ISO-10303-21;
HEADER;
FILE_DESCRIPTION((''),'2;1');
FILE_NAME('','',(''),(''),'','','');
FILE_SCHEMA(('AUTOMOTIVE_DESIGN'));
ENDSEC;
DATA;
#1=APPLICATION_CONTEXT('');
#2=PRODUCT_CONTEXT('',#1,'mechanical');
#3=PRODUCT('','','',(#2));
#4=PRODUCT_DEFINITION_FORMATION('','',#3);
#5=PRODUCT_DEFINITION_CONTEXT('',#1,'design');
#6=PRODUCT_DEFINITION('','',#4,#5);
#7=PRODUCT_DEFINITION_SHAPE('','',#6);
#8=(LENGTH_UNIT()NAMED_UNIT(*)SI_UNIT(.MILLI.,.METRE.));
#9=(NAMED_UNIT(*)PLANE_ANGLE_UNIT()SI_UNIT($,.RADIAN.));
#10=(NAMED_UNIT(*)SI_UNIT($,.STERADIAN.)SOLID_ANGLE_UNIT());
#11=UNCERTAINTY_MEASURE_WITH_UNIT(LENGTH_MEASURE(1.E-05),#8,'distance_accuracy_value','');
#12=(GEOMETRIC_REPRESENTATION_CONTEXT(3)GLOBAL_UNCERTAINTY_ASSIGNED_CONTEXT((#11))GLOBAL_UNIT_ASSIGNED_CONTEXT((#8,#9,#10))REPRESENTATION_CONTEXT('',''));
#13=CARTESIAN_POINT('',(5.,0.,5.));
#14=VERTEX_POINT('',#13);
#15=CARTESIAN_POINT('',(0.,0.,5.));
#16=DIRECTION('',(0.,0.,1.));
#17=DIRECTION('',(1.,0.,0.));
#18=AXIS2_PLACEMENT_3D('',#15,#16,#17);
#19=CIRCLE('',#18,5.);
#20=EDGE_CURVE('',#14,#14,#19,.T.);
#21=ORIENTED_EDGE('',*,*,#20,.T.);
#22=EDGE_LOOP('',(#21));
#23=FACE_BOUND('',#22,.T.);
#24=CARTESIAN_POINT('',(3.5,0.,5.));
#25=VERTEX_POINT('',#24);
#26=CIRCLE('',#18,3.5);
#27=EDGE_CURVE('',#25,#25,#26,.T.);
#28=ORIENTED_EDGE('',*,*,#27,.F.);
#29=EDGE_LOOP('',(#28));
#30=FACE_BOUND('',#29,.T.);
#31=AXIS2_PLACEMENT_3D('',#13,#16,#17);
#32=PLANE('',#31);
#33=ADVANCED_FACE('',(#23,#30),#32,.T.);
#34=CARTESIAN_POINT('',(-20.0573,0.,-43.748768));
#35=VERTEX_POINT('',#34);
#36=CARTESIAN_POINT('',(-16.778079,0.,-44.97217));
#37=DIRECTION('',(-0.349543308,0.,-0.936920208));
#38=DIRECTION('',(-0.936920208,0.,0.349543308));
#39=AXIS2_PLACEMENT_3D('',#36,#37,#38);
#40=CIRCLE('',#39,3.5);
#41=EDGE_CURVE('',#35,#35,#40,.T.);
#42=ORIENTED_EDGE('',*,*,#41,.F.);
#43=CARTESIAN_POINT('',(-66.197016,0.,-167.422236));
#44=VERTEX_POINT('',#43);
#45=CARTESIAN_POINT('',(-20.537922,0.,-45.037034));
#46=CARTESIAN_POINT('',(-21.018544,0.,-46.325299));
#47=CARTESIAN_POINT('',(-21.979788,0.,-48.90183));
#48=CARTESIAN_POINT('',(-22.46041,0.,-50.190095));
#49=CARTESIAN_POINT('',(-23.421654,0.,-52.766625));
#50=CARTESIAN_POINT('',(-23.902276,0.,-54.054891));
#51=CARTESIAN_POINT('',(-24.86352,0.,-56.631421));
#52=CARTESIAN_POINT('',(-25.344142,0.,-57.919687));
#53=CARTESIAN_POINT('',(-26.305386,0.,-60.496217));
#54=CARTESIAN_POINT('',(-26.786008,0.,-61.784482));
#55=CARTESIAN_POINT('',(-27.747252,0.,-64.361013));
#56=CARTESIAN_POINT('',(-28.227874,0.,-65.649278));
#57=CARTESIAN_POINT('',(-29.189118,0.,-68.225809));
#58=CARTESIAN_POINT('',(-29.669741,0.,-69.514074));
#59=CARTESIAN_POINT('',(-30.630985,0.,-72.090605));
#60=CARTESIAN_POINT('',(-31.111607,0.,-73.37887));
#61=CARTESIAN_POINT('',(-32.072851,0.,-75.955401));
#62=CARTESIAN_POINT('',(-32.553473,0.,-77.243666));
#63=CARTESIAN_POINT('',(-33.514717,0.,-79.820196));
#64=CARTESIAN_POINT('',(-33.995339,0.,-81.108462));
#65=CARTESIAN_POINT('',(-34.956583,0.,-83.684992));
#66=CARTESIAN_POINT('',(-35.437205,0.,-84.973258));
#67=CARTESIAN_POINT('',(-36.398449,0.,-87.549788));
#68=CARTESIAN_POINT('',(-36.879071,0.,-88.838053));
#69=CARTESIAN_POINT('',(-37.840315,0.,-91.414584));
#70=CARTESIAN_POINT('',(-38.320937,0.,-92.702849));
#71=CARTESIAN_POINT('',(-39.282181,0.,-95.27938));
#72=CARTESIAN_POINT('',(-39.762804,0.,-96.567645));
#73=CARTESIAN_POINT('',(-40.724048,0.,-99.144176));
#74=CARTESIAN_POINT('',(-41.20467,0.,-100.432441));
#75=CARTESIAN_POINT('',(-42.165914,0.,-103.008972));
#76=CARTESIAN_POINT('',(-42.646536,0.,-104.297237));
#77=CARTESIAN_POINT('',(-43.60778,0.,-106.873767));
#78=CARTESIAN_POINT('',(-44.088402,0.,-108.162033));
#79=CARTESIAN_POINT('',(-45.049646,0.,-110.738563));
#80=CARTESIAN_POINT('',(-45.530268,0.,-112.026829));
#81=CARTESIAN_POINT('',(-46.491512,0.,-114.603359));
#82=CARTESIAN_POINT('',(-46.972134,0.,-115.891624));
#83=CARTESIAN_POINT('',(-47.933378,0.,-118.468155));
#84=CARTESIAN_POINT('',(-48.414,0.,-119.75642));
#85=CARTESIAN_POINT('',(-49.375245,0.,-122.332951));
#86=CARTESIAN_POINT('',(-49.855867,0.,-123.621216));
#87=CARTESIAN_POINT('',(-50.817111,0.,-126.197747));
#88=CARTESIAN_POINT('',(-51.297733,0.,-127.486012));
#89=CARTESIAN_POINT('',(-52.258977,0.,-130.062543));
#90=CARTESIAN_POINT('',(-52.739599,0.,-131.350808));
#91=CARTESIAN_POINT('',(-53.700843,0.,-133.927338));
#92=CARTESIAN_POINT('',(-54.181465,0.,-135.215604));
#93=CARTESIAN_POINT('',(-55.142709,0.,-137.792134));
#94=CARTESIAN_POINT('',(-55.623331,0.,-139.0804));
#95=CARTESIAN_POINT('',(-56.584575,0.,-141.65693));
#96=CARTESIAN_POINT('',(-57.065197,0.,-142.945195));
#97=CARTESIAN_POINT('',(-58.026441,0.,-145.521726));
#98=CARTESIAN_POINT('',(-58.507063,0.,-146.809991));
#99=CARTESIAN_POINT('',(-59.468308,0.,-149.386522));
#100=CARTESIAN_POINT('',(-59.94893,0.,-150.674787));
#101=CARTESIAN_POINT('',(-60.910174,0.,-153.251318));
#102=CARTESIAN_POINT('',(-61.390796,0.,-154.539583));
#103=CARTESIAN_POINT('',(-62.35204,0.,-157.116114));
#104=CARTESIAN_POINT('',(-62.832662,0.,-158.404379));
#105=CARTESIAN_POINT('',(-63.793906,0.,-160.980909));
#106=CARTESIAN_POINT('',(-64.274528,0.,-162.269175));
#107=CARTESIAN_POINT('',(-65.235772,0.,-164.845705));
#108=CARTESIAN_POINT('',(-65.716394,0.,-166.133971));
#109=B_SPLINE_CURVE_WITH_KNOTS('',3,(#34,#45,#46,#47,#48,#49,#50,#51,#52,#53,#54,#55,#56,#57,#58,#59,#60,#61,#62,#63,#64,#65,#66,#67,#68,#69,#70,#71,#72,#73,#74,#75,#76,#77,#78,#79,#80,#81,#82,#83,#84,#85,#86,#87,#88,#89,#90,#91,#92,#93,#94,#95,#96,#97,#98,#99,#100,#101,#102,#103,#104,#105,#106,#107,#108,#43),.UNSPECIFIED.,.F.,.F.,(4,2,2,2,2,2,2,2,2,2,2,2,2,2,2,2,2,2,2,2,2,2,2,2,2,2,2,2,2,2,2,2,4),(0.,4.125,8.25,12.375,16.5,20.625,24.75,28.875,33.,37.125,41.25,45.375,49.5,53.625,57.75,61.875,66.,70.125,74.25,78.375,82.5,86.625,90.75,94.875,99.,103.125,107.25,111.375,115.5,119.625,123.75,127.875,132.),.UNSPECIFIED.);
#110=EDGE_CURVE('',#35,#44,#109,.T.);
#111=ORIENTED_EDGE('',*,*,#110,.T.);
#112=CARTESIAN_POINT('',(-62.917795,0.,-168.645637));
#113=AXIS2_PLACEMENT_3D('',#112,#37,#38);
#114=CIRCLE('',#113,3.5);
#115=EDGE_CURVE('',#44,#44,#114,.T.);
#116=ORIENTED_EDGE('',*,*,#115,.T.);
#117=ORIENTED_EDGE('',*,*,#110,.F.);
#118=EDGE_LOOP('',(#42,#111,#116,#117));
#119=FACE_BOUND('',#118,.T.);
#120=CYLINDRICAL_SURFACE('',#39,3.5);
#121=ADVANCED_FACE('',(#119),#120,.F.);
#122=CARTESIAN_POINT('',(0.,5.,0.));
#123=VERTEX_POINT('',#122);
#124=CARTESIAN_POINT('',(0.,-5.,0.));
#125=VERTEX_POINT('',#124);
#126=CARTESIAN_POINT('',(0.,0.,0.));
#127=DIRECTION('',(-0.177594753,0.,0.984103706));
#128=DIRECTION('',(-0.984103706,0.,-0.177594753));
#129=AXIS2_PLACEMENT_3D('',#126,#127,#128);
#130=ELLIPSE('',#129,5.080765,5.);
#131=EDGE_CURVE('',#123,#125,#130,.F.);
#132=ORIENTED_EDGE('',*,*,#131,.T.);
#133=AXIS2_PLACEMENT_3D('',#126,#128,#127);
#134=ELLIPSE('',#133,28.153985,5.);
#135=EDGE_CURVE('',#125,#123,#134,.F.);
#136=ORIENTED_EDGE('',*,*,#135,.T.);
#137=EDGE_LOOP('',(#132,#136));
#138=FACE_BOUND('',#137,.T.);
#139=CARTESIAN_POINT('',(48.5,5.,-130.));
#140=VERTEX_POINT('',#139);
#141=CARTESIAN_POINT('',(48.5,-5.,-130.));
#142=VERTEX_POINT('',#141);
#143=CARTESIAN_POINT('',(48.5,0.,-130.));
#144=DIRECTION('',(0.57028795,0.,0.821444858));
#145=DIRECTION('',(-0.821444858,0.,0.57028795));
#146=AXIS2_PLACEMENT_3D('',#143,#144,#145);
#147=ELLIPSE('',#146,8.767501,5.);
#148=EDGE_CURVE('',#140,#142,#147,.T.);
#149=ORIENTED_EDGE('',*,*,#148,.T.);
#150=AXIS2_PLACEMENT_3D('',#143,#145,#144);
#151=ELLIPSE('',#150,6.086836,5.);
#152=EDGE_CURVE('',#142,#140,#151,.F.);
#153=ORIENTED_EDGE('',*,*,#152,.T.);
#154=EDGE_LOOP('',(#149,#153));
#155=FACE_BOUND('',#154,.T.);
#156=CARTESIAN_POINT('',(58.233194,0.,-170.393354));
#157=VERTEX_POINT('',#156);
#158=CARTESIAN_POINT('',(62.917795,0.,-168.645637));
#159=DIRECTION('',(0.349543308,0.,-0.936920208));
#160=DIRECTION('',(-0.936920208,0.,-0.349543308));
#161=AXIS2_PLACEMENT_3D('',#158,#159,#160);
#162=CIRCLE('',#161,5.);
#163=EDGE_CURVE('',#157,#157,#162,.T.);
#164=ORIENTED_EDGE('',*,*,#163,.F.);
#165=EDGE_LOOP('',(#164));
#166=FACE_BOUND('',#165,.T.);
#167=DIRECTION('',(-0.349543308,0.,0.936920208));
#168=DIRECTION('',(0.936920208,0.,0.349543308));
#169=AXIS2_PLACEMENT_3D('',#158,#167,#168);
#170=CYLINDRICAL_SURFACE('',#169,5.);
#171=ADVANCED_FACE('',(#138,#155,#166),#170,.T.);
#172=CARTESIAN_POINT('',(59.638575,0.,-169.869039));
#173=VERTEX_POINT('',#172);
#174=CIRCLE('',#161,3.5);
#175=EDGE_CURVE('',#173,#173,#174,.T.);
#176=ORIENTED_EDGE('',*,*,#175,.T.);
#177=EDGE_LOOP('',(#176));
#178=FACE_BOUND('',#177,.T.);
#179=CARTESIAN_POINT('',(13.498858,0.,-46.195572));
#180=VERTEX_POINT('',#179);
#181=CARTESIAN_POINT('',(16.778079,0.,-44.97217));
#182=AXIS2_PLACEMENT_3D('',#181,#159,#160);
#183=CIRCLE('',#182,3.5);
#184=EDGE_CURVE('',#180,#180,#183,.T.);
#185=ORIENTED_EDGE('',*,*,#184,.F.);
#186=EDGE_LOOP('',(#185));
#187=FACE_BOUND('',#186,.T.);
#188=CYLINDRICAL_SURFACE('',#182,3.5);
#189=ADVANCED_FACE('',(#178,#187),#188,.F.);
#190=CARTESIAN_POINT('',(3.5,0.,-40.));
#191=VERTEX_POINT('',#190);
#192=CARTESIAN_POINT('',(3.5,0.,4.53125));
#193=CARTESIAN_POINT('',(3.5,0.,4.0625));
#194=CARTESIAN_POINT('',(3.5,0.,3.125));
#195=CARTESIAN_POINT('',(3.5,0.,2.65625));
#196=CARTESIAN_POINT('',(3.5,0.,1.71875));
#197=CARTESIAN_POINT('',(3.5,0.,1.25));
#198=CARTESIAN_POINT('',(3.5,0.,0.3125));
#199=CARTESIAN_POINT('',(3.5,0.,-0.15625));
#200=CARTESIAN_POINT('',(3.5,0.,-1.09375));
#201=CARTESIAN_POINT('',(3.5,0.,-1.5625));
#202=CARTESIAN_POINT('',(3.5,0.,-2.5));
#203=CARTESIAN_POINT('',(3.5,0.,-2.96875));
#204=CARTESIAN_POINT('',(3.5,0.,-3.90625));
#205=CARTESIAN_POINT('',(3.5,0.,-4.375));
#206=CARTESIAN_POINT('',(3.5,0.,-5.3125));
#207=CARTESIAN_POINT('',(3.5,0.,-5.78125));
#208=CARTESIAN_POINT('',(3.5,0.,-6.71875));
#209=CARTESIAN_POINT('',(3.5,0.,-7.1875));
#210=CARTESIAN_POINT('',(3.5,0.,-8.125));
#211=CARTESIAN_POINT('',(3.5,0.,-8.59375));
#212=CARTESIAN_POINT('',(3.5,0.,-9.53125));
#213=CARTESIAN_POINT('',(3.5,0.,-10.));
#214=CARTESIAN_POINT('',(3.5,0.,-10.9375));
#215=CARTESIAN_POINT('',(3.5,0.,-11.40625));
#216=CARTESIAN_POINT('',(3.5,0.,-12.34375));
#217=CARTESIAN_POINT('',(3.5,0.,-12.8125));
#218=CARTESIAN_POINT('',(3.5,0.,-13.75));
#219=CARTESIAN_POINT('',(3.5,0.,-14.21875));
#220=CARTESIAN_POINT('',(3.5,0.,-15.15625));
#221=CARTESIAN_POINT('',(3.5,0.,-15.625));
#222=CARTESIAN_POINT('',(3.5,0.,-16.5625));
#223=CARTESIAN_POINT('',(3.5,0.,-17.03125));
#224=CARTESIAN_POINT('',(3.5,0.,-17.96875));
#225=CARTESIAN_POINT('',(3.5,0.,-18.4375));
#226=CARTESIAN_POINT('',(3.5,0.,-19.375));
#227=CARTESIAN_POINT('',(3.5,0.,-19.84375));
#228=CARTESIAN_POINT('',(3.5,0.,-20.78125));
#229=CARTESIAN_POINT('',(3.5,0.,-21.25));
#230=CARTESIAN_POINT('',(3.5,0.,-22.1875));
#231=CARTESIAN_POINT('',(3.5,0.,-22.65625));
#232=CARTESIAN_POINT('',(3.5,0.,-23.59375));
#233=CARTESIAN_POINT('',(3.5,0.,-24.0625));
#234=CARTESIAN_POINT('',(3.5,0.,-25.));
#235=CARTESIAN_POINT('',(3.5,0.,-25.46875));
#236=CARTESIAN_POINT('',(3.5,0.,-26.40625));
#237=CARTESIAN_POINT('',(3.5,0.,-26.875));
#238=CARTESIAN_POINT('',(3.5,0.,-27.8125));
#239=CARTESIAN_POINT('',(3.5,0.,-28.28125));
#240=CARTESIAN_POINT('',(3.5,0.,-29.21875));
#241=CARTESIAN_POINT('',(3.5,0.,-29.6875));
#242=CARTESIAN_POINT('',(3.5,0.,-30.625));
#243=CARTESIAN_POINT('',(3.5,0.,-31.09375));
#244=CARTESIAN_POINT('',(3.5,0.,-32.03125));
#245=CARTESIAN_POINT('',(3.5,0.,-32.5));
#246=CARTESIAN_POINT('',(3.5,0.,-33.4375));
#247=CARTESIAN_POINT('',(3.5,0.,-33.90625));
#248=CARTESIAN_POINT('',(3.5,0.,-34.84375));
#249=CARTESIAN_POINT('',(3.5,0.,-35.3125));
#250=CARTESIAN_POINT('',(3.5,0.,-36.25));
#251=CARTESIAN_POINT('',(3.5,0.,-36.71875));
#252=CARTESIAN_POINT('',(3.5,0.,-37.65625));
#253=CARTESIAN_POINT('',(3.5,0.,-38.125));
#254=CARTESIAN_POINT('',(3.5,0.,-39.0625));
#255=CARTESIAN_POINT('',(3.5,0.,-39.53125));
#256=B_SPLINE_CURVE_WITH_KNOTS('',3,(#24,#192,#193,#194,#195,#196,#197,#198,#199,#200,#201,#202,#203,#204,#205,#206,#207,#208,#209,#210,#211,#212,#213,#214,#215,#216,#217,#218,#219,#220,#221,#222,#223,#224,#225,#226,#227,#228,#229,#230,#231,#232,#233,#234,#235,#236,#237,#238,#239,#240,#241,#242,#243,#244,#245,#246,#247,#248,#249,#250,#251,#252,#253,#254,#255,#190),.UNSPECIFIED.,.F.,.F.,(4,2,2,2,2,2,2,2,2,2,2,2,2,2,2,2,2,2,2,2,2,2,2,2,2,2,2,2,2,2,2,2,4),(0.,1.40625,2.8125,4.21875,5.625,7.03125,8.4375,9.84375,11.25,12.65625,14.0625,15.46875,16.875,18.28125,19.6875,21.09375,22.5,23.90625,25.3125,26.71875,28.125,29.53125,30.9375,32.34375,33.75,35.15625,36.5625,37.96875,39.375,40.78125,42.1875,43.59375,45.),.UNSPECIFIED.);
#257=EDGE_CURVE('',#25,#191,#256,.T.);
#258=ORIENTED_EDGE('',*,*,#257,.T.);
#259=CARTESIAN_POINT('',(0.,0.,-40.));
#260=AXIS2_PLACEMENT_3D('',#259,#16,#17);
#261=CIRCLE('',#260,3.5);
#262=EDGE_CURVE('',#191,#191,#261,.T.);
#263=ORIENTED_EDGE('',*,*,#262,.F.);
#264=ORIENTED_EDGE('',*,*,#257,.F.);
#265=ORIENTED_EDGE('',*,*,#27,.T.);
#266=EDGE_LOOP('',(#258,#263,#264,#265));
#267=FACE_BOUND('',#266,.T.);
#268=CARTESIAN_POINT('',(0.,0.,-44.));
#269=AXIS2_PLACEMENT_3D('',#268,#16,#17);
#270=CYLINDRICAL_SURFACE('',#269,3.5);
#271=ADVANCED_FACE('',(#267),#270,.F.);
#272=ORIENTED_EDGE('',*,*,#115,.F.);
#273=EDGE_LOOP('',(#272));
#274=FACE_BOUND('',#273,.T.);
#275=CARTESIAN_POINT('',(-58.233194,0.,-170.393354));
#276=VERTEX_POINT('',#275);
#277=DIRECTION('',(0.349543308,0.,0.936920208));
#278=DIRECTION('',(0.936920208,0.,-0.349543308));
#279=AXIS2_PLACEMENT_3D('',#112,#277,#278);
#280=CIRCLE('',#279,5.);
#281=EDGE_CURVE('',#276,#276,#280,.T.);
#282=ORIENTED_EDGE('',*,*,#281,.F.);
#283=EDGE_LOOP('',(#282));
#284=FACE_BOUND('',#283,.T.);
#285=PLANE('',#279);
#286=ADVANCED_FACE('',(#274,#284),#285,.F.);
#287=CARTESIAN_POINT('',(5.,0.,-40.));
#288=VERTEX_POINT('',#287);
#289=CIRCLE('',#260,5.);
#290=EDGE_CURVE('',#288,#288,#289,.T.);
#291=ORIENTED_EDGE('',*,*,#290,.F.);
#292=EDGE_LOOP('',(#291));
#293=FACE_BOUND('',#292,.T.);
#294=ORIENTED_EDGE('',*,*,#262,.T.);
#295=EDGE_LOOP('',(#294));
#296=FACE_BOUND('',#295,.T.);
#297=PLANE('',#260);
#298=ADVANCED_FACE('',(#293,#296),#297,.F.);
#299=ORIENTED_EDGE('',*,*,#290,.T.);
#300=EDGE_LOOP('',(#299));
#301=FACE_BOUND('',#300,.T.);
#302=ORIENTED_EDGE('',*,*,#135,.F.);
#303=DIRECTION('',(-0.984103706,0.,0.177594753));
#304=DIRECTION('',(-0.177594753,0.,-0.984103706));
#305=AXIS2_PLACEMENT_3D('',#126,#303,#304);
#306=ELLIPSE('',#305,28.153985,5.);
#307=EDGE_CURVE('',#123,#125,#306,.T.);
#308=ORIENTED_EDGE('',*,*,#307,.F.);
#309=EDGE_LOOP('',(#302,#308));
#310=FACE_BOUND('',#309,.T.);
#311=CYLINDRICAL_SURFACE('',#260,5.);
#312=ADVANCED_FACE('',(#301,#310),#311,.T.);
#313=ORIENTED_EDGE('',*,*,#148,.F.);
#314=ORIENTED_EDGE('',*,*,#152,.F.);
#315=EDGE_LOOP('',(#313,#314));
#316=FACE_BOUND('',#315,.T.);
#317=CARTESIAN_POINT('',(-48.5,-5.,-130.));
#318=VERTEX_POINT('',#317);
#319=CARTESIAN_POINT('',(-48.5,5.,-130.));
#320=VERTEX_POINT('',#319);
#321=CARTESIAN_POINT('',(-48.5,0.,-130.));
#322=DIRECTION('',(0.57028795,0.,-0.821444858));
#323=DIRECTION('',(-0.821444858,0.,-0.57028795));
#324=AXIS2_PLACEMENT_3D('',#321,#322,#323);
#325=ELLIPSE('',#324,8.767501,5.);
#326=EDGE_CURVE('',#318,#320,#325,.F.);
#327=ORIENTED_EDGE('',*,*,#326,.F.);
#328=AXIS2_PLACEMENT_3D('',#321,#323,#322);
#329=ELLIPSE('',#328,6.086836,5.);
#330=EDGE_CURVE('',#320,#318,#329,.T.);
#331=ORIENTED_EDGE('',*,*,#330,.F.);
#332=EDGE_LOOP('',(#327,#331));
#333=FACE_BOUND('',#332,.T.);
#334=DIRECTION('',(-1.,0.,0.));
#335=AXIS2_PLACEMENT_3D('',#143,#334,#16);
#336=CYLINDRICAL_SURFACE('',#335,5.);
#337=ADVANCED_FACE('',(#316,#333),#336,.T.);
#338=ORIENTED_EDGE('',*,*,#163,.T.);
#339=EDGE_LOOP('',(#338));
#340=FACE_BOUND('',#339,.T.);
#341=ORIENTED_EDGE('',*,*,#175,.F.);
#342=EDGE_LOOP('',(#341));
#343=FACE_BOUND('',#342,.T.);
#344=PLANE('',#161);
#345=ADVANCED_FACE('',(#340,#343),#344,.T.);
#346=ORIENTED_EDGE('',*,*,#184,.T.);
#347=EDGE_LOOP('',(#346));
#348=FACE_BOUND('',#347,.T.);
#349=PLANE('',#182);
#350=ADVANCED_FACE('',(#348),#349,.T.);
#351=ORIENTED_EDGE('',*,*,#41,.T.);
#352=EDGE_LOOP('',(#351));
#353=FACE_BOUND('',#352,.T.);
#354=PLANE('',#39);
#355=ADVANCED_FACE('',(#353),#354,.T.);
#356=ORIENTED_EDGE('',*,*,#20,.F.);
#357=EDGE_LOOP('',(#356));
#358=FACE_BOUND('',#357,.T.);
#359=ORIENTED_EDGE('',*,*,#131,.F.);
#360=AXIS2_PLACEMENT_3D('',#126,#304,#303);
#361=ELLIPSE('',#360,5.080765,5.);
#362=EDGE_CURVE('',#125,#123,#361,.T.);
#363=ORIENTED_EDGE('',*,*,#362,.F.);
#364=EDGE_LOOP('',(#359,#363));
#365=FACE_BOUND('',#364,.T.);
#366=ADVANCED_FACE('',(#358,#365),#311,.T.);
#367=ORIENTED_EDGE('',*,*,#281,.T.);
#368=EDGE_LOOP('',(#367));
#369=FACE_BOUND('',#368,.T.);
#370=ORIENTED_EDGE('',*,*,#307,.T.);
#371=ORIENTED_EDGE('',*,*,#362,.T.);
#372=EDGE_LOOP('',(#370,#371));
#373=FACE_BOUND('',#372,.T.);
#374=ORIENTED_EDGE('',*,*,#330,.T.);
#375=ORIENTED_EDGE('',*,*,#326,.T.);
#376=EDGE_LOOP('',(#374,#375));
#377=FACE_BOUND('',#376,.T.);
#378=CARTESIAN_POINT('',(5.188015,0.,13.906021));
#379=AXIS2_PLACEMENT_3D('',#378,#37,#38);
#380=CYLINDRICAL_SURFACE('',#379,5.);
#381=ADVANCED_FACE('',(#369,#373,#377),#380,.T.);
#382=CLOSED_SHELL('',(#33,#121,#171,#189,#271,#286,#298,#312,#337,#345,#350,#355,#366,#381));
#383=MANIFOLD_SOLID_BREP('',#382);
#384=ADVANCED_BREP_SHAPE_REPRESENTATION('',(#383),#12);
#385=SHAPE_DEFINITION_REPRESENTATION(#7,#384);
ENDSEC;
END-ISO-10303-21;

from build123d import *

# Parameters (mm, degrees)
SWEEP1_PROFILE_R   = 5
SWEEP4_PROFILE_R   = 5
SWEEP5_PROFILE_R   = 5
SPLIT1_START       = 5
SPLIT1_OUTLINE_W   = 10
SPLIT1_OUTLINE_H   = 12
SPLIT1_DEPTH       = 9.304379119
SKETCH37_R         = 3.5
CUT_EXTRUDE1_DEPTH = 49
SKETCH38_R         = 3.5
CUT_EXTRUDE2_DEPTH = 132
SKETCH39_R         = 3.5
CUT_EXTRUDE3_DEPTH = 132


# Read off the part's stored shape, not the designer's step: Split1
with BuildPart() as part:
    # Sweep1: sweep along a path in Sketch1
    with BuildLine(Plane(origin=(0, 0, 0), x_dir=(1, 0, 0), z_dir=(0, 1, 0))) as sweep1_path:
        Line((-62.917795488, 168.645637391), (0, 0))
        Line((0, 0), (62.917795488, 168.645637391))
    # Sweep1 profile (on start of the path) → Sweep1 (sweep)
    with BuildSketch(Plane(origin=(-62.917795488, 0, -168.645637391), x_dir=(0.936920207726199, 0, -0.349543308267082), z_dir=(0.349543308267082, 0, 0.936920207726199))):
        Circle(SWEEP1_PROFILE_R)
    sweep(path=sweep1_path.line, transition=Transition.RIGHT)

    # Sweep4: sweep along a path in Sketch1<7>
    with BuildLine(Plane(origin=(0, 0, 0), x_dir=(1, 0, 0), z_dir=(0, 1, 0))) as sweep4_path:
        Line((0, 40), (0, -5))
    # Sweep4 profile (on start of the path) → Sweep4 (sweep)
    with BuildSketch(Plane.XY.offset(-40)):
        Circle(SWEEP4_PROFILE_R)
    sweep(path=sweep4_path.line)

    # Sweep5: sweep along a path in Sketch1<8>
    with BuildLine(Plane(origin=(0, 0, 0), x_dir=(1, 0, 0), z_dir=(0, 1, 0))) as sweep5_path:
        Line((48.5, 130), (-48.5, 130))
    # Sweep5 profile (on start of the path) → Sweep5 (sweep)
    with BuildSketch(Plane(origin=(48.5, 0, -130), x_dir=(0, 0, -1), z_dir=(-1, 0, 0))):
        Circle(SWEEP5_PROFILE_R)
    sweep(path=sweep5_path.line)

    # Split1 outline → Split1 (cut)
    with BuildSketch(Plane.XY.offset(SPLIT1_START)):
        Rectangle(SPLIT1_OUTLINE_W, SPLIT1_OUTLINE_H)
    extrude(amount=SPLIT1_DEPTH, mode=Mode.SUBTRACT)

    # Sketch37 → Cut-Extrude1 (cut)
    with BuildSketch(Plane.XY.offset(5)):
        Circle(SKETCH37_R)
    extrude(amount=-CUT_EXTRUDE1_DEPTH, mode=Mode.SUBTRACT)

    # Sketch38 → Cut-Extrude2 (cut)
    with BuildSketch(Plane(origin=(-62.917795488, 0, -168.645637391), x_dir=(-0.9369202077261991, 0, 0.34954330826708174), z_dir=(-0.34954330826708174, 0, -0.9369202077261991))):
        Circle(SKETCH38_R)
    extrude(amount=-CUT_EXTRUDE2_DEPTH, mode=Mode.SUBTRACT)

    # Sketch39 → Cut-Extrude3 (cut)
    with BuildSketch(Plane(origin=(62.917795488, 0, -168.645637391), x_dir=(-0.9369202077261989, 0, -0.3495433082670822), z_dir=(0.3495433082670822, 0, -0.9369202077261989))):
        Circle(SKETCH39_R)
    extrude(amount=-CUT_EXTRUDE3_DEPTH, mode=Mode.SUBTRACT)


solid = part.part
